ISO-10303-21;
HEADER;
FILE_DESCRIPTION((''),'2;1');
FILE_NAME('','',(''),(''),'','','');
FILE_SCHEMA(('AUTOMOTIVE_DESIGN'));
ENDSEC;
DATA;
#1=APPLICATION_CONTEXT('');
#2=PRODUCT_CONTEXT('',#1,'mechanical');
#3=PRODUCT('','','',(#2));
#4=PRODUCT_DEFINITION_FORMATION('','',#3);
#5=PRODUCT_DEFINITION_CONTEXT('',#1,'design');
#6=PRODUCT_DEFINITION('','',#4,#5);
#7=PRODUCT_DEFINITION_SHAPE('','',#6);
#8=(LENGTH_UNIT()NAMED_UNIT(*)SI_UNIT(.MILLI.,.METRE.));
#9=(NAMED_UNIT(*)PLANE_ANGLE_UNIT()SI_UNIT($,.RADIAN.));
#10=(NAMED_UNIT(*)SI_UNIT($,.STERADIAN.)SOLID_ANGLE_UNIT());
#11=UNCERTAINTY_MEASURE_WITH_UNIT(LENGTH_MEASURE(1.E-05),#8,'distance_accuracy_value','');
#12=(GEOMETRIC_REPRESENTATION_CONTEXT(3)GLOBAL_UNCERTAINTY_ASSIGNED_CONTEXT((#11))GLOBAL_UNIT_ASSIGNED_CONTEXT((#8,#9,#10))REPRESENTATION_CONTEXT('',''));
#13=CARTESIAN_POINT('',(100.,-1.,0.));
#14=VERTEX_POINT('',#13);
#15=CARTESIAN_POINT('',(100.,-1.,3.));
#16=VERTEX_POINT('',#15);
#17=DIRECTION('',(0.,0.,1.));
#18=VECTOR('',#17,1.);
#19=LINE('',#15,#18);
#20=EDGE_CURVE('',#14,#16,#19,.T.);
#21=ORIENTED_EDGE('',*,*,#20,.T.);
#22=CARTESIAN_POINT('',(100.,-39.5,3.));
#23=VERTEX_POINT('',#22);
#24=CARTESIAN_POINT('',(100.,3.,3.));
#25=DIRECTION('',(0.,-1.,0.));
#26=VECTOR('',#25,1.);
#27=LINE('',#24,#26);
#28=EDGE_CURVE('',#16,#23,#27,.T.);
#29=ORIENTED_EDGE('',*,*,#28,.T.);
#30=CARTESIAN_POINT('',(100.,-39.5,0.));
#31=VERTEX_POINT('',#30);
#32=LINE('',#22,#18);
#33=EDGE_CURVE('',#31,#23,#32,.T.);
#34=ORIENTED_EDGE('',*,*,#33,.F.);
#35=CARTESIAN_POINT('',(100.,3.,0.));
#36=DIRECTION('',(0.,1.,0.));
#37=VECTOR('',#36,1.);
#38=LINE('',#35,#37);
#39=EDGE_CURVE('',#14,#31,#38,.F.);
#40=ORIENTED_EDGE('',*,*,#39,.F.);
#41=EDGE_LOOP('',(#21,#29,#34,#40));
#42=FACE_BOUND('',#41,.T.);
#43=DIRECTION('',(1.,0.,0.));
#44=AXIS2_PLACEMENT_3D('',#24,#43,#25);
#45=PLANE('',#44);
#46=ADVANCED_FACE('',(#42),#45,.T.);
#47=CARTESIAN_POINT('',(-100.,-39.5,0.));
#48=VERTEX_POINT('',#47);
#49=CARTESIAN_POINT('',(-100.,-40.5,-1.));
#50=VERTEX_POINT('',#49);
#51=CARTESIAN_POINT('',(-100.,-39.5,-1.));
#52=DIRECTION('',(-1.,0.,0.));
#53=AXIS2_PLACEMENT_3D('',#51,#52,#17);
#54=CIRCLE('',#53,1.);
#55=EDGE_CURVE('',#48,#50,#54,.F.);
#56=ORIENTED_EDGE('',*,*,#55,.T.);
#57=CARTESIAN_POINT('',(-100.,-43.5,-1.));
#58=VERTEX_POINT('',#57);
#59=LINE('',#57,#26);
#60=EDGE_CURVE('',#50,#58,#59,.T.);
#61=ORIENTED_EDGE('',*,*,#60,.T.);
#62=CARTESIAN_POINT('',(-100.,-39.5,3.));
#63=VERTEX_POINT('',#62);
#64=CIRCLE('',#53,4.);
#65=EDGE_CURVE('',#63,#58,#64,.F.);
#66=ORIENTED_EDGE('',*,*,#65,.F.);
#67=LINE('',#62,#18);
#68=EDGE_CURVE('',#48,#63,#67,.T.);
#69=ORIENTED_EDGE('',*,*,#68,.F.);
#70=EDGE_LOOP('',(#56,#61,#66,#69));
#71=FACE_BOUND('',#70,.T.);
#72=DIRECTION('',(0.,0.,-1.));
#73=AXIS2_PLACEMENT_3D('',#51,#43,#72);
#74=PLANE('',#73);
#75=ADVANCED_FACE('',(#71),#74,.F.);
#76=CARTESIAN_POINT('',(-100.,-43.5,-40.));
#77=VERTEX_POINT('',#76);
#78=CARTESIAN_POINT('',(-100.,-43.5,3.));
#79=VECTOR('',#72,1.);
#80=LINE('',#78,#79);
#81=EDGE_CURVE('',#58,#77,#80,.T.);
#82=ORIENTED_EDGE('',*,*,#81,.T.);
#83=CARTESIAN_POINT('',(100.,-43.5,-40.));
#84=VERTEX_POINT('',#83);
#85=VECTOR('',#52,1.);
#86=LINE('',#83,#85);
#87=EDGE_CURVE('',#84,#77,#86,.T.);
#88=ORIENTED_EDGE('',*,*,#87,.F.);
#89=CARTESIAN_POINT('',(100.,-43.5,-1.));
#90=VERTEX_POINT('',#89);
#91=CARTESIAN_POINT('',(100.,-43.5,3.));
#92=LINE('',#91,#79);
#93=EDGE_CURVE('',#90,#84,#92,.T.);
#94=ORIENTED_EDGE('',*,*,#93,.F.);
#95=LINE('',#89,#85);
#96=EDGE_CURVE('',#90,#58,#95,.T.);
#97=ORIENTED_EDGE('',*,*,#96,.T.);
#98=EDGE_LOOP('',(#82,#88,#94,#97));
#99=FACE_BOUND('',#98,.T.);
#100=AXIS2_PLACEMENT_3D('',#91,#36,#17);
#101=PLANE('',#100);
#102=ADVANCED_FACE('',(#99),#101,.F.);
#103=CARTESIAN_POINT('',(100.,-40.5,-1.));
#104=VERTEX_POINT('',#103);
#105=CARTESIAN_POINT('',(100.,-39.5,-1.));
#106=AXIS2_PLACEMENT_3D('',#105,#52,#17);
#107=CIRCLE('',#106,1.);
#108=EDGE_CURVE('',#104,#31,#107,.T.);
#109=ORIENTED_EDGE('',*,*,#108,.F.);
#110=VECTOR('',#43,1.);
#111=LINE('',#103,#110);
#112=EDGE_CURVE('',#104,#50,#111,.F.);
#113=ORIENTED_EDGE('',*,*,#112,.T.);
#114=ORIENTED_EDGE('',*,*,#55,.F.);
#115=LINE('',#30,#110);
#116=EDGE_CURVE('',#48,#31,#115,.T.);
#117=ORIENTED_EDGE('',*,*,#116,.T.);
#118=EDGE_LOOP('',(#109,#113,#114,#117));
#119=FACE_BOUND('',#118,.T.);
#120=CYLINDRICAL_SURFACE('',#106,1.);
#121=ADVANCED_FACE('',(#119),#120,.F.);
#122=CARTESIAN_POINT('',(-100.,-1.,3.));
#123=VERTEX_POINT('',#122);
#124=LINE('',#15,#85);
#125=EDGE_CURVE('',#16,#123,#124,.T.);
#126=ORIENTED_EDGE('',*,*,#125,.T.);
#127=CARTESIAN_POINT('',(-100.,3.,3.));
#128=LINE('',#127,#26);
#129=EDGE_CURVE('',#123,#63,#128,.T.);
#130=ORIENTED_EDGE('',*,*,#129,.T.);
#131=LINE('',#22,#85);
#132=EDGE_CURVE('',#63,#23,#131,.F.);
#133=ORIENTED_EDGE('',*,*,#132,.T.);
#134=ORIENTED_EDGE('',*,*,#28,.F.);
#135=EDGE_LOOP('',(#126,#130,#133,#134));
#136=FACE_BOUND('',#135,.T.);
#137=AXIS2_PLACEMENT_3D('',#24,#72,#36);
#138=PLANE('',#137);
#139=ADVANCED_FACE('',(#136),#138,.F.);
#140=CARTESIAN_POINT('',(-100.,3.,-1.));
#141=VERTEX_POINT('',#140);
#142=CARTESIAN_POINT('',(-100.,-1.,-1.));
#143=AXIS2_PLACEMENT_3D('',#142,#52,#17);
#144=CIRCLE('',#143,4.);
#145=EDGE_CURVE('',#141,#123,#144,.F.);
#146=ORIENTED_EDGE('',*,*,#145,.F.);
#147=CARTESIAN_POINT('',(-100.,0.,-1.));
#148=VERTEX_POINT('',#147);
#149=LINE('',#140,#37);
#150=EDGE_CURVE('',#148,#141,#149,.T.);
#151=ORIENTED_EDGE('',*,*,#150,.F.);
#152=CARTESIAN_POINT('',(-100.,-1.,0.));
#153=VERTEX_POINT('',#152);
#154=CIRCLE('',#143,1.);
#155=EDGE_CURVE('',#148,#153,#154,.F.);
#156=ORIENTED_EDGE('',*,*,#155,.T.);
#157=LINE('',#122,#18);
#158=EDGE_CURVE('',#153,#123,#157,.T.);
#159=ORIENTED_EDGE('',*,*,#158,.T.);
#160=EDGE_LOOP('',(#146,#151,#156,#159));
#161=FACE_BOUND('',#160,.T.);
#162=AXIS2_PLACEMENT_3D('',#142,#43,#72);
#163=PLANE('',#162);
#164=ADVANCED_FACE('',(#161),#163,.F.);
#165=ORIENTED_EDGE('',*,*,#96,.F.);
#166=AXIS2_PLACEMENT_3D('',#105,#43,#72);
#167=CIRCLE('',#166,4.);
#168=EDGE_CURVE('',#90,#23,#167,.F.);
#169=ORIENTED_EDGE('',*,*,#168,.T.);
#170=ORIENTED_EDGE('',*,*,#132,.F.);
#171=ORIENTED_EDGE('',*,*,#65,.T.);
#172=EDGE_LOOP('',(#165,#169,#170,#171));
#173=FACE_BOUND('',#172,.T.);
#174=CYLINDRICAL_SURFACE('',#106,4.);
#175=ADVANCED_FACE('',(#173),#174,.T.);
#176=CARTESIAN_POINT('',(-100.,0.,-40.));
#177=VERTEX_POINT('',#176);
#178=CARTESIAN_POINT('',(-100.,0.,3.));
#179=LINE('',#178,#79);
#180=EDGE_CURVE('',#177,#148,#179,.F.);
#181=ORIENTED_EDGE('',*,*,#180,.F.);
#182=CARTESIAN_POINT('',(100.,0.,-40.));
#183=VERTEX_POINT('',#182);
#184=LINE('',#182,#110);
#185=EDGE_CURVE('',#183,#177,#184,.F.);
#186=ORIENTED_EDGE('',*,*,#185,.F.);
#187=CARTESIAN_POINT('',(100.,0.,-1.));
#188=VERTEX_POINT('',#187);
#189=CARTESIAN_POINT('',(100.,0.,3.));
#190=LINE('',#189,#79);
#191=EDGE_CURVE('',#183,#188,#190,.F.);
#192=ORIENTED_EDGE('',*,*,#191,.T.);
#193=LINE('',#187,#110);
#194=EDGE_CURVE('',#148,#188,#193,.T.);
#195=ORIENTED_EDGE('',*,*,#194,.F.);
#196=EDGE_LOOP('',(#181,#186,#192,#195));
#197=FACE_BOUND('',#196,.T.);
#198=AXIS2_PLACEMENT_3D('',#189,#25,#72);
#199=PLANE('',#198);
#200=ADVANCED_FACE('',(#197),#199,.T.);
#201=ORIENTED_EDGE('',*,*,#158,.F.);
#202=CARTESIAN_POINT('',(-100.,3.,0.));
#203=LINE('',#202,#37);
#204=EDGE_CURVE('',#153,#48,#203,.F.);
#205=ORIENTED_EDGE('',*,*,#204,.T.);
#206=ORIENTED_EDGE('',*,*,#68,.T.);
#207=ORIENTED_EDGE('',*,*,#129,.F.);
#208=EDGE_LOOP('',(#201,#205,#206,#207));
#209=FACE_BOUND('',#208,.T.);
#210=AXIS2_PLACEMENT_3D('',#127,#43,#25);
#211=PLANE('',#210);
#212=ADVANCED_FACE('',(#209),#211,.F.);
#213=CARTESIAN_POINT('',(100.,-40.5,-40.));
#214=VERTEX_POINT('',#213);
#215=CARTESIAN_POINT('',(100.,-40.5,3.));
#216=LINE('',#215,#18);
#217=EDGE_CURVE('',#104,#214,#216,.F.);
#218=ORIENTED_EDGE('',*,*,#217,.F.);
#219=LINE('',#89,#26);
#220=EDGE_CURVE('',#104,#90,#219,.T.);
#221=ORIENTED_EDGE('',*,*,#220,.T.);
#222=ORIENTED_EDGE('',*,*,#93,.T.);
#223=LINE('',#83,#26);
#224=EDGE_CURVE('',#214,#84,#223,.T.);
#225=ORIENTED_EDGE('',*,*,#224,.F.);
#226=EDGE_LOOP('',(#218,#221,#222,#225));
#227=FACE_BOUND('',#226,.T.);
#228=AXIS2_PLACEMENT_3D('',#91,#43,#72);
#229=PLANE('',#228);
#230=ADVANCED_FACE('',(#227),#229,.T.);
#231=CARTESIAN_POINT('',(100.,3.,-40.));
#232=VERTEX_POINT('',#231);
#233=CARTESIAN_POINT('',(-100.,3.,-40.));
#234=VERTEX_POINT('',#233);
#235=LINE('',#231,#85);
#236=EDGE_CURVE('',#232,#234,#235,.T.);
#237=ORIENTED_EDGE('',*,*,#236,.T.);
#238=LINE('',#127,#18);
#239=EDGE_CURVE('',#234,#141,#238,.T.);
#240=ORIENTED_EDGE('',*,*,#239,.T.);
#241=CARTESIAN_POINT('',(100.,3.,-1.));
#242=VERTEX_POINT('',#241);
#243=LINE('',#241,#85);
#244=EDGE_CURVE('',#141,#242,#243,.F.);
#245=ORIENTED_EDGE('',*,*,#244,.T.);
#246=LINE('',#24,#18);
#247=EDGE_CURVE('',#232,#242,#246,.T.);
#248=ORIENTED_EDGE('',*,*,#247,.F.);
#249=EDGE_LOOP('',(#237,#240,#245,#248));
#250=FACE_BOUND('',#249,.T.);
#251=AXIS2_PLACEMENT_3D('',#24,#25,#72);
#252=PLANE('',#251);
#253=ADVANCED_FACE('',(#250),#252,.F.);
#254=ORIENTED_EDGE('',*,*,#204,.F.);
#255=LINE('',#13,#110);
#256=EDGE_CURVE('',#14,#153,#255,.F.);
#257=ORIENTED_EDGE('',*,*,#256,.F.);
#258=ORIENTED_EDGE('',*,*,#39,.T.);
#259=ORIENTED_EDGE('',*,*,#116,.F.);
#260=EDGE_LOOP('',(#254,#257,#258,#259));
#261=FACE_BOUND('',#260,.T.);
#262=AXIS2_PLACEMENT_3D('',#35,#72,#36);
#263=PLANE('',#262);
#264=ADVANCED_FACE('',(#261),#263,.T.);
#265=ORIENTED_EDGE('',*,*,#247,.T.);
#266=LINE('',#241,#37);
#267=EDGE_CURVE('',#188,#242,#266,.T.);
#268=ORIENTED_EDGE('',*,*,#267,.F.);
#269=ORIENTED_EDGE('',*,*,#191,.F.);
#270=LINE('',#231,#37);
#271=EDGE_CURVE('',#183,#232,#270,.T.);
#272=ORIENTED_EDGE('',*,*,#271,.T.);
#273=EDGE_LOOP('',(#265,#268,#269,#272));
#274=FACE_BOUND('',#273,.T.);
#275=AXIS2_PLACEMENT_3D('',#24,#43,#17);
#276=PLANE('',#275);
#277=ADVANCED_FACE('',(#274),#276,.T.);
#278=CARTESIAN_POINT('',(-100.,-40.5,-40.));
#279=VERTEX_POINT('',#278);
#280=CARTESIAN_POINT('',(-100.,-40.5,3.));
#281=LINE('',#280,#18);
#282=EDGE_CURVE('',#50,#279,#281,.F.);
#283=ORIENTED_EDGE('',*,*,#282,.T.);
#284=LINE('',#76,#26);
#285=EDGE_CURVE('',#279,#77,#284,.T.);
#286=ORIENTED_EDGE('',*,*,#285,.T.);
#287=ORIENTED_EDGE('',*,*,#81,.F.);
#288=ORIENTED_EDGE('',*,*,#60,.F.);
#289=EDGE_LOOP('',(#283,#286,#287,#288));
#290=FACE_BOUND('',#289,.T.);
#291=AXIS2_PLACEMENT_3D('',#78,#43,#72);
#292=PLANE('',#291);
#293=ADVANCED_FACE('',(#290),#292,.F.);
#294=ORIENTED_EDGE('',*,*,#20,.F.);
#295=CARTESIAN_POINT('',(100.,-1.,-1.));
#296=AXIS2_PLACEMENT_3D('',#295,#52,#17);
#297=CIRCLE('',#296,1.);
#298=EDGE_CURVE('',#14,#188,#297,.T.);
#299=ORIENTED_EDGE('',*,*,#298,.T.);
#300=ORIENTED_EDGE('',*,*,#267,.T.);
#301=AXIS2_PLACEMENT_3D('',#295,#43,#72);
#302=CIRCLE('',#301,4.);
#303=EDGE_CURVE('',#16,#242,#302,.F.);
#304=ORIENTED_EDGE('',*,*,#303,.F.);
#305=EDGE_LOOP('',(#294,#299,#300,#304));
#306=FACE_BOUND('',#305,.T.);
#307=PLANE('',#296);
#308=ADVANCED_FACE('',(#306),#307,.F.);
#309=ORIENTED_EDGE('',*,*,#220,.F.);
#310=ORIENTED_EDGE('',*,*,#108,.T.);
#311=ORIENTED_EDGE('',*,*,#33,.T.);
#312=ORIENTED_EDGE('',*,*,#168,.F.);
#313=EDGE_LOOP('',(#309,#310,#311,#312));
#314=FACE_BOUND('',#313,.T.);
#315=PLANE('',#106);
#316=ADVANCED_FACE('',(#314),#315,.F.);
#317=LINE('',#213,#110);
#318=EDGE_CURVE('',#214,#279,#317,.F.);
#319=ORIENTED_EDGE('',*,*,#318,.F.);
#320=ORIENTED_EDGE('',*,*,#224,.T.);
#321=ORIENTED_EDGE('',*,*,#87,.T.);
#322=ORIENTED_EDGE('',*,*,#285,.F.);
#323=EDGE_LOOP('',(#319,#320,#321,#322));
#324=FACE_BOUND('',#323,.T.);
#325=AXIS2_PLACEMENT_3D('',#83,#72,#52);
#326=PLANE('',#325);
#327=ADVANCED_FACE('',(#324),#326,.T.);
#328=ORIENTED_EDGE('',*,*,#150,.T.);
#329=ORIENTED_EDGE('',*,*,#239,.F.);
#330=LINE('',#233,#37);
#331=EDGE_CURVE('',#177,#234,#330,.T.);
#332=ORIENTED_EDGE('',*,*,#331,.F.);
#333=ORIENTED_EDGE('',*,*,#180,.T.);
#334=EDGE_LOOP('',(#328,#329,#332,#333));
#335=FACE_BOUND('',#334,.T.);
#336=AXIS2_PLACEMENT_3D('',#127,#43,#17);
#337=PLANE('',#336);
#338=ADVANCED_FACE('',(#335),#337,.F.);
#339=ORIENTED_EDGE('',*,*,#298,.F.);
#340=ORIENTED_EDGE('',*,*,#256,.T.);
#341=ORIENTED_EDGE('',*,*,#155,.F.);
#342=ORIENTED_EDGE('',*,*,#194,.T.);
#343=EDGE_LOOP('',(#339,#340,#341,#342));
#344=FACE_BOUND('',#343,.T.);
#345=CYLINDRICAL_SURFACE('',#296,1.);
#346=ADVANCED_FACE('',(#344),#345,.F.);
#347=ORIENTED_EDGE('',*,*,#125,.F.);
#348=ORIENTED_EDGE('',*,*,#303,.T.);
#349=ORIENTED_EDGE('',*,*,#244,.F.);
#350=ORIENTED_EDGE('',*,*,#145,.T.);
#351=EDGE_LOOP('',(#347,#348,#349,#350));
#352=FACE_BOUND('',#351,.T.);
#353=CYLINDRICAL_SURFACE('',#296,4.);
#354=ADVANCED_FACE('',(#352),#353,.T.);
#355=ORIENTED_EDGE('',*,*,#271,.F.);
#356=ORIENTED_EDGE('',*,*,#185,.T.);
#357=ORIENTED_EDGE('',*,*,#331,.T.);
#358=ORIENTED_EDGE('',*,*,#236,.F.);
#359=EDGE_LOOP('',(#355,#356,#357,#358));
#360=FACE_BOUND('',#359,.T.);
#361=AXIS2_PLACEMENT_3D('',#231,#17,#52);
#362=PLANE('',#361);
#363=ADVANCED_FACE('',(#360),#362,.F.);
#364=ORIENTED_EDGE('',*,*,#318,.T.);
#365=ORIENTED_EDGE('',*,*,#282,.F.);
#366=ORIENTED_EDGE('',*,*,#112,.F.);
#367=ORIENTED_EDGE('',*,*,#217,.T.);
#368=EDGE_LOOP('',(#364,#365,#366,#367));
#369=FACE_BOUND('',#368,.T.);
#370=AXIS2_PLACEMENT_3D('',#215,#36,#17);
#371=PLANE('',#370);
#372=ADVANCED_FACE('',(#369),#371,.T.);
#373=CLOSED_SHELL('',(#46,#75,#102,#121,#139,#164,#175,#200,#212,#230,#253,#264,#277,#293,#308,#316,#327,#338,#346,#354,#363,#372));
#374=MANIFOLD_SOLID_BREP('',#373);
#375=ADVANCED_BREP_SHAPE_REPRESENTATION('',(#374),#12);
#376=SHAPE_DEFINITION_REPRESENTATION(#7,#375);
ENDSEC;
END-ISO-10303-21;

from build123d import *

# Parameters (mm, degrees)
BOSS_EXTRUDE1_DEPTH    = 100
CONVERT_SOLID1_START   = -100
CONVERT_SOLID1_DEPTH   = 200
CONVERT_SOLID1_2_DEPTH = 200


# Read off the part's stored shape, not the designer's step: Convert-Solid1
with BuildPart() as part:
    # Sketch1 → Boss-Extrude1 (new, symmetric)
    with BuildSketch(Plane(origin=(0, 0, 0), x_dir=(0, 0, -1), z_dir=(1, 0, 0))):
        Polygon((0, 0), (0, -40.5), (40, -40.5), (40, -43.5), (-3, -43.5), (-3, 3), (40, 3), (40, 0), align=None)
    extrude(amount=BOSS_EXTRUDE1_DEPTH, both=True)

    # Convert-Solid1 outline → Convert-Solid1 (cut)
    with BuildSketch(Plane.YZ.offset(CONVERT_SOLID1_START)):
        with BuildLine():
            Line((3, 3), (-1, 3))
            ThreePointArc((-1, 3), (1.828427125, 1.828427125), (3, -1))
            Line((3, -1), (3, 3))
        make_face()
        with BuildLine():
            ThreePointArc((-43.5, -1), (-42.328427125, 1.828427125), (-39.5, 3))
            Line((-39.5, 3), (-43.5, 3))
            Line((-43.5, 3), (-43.5, -1))
        make_face()
    extrude(amount=CONVERT_SOLID1_DEPTH, mode=Mode.SUBTRACT)

    # Convert-Solid1 2 outline → Convert-Solid1 2 (add)
    with BuildSketch(Plane.YZ.offset(CONVERT_SOLID1_START)):
        with BuildLine():
            Line((0, 0), (-1, 0))
            ThreePointArc((-1, 0), (-0.292893219, -0.292893219), (0, -1))
            Line((0, -1), (0, 0))
        make_face()
        with BuildLine():
            ThreePointArc((-40.5, -1), (-40.207106781, -0.292893219), (-39.5, 0))
            Line((-39.5, 0), (-40.5, 0))
            Line((-40.5, 0), (-40.5, -1))
        make_face()
    extrude(amount=CONVERT_SOLID1_2_DEPTH)


solid = part.part
